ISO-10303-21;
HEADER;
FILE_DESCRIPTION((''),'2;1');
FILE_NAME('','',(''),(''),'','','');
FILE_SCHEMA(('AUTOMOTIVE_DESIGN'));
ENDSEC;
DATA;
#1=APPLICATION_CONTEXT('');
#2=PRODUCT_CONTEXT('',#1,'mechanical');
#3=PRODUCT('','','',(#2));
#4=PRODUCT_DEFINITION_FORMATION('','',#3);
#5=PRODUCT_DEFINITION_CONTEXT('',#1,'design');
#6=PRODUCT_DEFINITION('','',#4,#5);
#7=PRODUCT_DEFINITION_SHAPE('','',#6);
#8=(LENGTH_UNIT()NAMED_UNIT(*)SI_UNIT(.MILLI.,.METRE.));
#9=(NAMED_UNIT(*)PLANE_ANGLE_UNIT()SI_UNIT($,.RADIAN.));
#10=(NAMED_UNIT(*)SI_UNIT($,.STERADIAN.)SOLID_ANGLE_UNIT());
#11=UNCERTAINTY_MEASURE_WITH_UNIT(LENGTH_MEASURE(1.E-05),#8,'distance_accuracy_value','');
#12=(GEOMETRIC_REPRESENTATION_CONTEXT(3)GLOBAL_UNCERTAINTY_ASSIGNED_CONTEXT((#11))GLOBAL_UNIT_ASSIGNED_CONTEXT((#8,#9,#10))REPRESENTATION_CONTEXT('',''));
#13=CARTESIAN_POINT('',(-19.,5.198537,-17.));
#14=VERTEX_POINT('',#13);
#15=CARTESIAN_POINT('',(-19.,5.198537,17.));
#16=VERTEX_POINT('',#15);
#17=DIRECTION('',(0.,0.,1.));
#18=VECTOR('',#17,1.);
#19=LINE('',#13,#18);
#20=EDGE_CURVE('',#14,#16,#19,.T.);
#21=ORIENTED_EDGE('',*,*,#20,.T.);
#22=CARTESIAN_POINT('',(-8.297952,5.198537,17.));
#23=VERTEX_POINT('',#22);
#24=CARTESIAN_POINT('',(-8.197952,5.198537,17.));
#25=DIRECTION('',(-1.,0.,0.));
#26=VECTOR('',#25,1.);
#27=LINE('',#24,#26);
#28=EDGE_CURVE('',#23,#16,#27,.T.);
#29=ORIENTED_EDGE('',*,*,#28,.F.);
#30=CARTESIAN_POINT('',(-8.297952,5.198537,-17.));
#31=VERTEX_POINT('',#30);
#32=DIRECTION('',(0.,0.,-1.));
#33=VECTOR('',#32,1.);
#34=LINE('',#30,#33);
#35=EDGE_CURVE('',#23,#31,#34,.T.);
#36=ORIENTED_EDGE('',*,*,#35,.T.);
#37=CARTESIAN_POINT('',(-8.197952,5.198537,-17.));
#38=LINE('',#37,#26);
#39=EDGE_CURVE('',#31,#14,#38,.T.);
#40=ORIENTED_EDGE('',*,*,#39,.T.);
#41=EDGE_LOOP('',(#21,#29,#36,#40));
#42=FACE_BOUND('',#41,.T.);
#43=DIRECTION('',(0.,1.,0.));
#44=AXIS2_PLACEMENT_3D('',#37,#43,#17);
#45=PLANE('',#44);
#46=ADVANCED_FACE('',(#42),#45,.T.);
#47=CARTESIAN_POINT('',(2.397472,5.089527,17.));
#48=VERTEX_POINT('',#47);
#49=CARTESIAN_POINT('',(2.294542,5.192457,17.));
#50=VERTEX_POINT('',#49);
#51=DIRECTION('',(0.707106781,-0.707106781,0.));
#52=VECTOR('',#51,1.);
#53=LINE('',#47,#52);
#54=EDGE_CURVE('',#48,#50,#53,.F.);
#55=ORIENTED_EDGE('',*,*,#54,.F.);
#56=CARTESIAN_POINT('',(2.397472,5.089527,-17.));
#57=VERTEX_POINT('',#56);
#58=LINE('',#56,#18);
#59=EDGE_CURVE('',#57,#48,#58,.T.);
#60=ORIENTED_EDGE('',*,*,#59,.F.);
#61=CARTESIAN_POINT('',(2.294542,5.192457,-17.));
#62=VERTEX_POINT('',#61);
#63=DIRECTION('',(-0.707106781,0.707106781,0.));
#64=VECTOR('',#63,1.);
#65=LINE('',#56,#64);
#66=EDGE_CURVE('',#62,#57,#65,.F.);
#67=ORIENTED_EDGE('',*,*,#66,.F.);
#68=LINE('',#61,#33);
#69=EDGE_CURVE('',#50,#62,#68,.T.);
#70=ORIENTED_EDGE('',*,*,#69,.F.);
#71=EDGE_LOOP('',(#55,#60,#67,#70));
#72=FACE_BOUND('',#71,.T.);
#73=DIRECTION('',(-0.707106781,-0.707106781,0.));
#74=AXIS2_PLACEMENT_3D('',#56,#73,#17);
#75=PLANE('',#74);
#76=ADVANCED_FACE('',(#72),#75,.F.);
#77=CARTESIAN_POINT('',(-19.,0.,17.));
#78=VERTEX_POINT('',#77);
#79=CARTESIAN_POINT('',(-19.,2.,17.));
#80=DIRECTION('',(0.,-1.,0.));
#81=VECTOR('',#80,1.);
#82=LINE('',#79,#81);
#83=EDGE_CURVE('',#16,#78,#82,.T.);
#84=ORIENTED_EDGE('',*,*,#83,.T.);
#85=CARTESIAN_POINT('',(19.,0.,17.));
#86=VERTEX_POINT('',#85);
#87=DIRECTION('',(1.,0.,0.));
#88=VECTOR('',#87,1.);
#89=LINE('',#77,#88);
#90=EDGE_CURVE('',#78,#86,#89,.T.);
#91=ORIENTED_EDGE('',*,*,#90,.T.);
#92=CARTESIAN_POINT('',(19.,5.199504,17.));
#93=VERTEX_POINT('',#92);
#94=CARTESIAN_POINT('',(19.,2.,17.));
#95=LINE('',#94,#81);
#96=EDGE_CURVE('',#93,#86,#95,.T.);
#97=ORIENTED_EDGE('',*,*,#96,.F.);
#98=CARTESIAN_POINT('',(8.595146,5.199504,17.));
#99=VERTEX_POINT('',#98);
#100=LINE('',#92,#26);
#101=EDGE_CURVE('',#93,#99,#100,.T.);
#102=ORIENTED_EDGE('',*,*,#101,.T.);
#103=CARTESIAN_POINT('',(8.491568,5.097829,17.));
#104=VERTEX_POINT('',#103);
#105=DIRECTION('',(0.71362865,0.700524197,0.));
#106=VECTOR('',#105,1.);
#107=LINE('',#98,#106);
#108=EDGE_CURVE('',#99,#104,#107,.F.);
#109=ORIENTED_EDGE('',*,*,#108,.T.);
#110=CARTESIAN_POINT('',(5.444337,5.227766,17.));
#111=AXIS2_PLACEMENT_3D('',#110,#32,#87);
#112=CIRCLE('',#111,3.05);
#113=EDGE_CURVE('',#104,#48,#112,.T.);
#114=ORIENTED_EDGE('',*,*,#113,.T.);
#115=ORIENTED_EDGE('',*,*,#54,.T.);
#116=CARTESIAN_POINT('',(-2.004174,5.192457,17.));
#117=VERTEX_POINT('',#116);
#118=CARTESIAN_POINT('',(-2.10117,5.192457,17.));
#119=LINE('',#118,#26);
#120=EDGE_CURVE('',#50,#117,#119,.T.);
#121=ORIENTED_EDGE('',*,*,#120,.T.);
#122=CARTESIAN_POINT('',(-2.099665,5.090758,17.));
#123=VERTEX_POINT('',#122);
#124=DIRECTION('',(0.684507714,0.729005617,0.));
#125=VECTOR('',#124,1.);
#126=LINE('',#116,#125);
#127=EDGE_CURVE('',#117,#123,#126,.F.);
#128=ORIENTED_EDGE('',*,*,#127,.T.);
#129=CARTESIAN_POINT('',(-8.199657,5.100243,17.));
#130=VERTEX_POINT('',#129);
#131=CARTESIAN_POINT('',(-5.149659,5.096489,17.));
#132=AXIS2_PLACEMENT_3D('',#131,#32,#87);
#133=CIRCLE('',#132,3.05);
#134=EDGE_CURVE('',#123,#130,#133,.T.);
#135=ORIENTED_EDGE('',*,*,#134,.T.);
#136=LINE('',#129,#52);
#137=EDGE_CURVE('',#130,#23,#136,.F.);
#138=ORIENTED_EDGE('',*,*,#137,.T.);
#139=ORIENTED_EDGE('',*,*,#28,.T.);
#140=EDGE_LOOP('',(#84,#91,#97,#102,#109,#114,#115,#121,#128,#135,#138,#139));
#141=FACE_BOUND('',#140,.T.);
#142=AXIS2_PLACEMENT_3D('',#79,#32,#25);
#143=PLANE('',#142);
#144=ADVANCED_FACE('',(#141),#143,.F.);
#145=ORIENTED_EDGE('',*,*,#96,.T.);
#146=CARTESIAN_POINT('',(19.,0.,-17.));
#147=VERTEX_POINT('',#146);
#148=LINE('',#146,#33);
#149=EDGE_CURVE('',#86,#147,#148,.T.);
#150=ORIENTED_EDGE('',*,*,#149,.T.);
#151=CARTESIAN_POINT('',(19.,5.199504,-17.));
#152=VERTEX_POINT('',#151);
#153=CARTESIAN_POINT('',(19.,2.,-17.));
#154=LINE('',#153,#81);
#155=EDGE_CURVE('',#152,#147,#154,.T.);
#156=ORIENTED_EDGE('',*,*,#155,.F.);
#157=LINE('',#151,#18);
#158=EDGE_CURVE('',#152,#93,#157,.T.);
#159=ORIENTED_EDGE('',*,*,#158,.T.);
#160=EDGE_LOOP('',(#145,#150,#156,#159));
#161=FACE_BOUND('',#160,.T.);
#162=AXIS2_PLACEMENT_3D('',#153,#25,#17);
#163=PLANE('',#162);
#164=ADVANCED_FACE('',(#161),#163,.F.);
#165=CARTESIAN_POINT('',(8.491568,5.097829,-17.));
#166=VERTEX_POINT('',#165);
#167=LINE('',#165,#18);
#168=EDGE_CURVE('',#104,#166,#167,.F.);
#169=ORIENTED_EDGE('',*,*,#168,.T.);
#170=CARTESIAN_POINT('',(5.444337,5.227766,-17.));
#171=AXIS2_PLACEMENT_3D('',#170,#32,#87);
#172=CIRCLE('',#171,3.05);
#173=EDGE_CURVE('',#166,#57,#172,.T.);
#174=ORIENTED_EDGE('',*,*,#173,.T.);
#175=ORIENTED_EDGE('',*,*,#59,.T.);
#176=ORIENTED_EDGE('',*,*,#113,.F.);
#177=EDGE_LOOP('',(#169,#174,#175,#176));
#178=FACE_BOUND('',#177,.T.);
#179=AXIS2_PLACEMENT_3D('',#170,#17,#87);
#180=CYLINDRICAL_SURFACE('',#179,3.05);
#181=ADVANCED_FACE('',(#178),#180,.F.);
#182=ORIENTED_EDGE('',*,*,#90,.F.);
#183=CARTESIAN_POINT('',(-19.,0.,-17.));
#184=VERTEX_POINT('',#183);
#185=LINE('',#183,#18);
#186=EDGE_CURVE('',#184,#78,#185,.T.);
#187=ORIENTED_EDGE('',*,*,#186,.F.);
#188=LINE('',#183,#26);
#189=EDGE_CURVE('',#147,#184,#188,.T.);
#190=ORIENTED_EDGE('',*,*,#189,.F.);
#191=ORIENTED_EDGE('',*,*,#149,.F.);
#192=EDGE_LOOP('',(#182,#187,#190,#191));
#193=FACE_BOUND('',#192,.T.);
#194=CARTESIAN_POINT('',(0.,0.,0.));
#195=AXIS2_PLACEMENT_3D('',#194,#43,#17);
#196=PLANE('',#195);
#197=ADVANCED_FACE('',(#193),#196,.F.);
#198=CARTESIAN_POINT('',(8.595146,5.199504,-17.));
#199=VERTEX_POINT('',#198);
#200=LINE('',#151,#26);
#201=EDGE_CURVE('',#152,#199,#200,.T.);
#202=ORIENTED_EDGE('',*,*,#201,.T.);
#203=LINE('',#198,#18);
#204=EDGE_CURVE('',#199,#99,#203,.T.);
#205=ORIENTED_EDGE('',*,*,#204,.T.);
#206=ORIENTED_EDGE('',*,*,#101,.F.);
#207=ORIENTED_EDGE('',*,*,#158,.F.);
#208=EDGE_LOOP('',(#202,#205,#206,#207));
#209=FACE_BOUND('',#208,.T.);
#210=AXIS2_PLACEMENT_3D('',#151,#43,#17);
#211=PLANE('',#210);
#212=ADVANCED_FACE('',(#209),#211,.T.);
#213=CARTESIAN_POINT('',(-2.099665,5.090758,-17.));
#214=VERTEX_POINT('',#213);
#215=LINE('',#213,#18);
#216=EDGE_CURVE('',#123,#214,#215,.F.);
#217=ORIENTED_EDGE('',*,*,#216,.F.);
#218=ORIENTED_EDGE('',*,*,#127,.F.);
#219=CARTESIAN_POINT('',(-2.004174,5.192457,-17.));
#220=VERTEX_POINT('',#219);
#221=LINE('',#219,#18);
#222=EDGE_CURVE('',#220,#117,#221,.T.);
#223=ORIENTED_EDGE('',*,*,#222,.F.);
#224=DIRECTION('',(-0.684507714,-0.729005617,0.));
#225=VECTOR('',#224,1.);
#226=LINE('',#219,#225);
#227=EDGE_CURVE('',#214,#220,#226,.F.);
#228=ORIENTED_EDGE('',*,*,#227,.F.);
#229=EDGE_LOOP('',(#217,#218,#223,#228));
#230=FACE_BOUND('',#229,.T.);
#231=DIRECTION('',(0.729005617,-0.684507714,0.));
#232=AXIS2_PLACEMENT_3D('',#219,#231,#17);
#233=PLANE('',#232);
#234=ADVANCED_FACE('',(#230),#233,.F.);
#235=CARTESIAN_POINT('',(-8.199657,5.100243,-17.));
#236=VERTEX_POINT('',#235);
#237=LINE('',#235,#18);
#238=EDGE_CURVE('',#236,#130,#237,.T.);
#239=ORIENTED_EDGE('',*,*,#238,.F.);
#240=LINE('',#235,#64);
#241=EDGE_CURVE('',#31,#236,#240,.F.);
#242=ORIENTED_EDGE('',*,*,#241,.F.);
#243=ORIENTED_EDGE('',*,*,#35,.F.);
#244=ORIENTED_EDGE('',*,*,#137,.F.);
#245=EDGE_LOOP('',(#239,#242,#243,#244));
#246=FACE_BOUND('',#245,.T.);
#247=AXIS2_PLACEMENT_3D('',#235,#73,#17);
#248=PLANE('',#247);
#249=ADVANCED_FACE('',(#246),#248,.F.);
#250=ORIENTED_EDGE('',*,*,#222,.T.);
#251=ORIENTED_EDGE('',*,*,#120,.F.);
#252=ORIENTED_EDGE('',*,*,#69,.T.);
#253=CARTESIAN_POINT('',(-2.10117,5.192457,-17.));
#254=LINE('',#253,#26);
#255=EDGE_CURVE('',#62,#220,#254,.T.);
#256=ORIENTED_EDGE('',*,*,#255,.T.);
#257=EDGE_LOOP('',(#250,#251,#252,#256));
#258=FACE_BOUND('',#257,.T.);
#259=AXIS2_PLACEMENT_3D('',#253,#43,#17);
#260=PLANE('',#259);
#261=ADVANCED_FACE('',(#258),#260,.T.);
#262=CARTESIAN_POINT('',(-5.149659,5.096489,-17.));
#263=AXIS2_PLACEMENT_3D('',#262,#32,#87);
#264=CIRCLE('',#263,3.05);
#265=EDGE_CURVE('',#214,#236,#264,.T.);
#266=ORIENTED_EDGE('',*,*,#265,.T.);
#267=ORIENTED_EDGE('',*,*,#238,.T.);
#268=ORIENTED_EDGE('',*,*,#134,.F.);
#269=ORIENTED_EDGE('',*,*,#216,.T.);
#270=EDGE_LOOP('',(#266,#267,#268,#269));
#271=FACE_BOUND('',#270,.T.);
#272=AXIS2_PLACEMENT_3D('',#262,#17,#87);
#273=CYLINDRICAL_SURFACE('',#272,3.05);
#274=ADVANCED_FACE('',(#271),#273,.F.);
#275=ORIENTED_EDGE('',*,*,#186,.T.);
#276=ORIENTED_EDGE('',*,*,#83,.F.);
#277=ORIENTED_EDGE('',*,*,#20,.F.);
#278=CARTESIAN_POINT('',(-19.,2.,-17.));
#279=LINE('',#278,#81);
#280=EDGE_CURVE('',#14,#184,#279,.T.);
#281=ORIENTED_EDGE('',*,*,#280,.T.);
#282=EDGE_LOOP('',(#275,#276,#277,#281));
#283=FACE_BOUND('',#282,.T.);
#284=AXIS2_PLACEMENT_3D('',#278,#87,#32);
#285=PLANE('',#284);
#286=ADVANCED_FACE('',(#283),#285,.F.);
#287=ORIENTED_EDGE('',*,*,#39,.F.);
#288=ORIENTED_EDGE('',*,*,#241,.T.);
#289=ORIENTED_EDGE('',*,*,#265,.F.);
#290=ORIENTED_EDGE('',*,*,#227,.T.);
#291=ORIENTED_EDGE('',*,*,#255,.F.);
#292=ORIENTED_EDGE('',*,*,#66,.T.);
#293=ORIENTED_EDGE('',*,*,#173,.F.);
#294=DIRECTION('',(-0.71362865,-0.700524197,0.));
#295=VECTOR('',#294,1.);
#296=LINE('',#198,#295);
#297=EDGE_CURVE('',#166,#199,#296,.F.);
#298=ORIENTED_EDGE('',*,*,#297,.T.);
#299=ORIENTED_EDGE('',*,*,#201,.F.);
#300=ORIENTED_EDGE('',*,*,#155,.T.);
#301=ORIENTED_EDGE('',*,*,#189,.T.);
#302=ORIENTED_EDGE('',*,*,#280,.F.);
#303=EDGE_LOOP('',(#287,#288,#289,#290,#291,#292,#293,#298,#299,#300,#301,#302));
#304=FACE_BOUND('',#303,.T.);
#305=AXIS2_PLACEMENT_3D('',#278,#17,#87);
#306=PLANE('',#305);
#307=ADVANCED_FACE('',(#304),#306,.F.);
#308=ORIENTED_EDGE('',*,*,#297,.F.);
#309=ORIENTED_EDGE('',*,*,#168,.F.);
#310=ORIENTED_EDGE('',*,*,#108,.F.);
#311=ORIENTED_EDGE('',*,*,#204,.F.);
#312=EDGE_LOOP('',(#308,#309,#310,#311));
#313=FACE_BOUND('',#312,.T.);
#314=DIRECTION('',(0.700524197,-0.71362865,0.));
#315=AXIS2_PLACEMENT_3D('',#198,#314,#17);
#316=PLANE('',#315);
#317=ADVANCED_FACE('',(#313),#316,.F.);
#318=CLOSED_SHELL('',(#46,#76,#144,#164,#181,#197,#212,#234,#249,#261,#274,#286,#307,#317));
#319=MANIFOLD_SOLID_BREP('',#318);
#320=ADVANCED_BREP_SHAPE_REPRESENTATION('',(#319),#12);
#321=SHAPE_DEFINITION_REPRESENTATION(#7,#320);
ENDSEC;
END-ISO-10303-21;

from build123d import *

# Parameters (mm, degrees)
SKETCH1_W           = 38
SKETCH1_H           = 34
BOSS_EXTRUDE1_DEPTH = 2
BOSS_EXTRUDE2_DEPTH = 34
CHAMFER1_SIZE       = 0.1
CHAMFER1_SIZE_2     = 0.100939666
CHAMFER1_SIZE_3     = 0.096996068


with BuildPart() as part:
    # Sketch1 → Boss-Extrude1 (new body)
    with BuildSketch(Plane(origin=(0, 0, 0), x_dir=(1, 0, 0), z_dir=(0, 1, 0))):
        Rectangle(SKETCH1_W, SKETCH1_H)
    extrude(amount=BOSS_EXTRUDE1_DEPTH)

    # Sketch2 → Boss-Extrude2 (add, through all)
    with BuildSketch(Plane.XY.offset(17)):
        with BuildLine():
            Line((-2.101169585, 5.192456713), (2.394541693, 5.192456713))
            ThreePointArc((2.394541693, 5.192456713), (5.447861319, 2.177768465), (8.494206352, 5.199504374))
            Line((8.494206352, 5.199504374), (19, 5.199504374))
            Line((19, 5.199504374), (19, 1.662378765))
            Line((19, 1.662378765), (-19, 1.662378765))
            Line((-19, 1.662378765), (-19, 5.198537403))
            Line((-19, 5.198537403), (-8.197951747, 5.198537403))
            ThreePointArc((-8.197951747, 5.198537403), (-5.152701361, 2.046490686), (-2.101169585, 5.192456713))
        make_face()
    extrude(amount=-BOSS_EXTRUDE2_DEPTH)

    # Chamfer1
    # the kernel refuses this chamfer: 0.101178115, 0.100939666, 0.1, 0.096996068, 0.096814929 mm, written as the material it takes off along each edge
    with BuildSketch(Plane(origin=(2.394541693, 5.192456713, 17.264875528), x_dir=(0.028454787424249305, -0.9995950805564424, 0), z_dir=(0, 0, -1))) as chamfer1_piece_1:
        with BuildLine():
            Line((0.102971734, 0), (-CHAMFER1_SIZE * 0.0284547874242, CHAMFER1_SIZE * 0.999595080556))
            Line((-CHAMFER1_SIZE * 0.0284547874242, CHAMFER1_SIZE * 0.999595080556), (0, 0))
            ThreePointArc((0, 0), (0.052957758, 0.000434232), (0.102971734, 0))
        make_face()
    extrude(amount=34.529751055, mode=Mode.SUBTRACT)
    with BuildSketch(Plane(origin=(8.494206352, 5.199504374, 17.261624735), x_dir=(1, 0, 0), z_dir=(0, 0, -1))) as chamfer1_piece_2:
        with BuildLine():
            Line((CHAMFER1_SIZE_2 * 0.999999995384, 0), (-0.002638157, 0.10167581))
            ThreePointArc((-0.002638157, 0.10167581), (-0.000933226, 0.052300381), (0, 0))
            Line((0, 0), (CHAMFER1_SIZE_2 * 0.999999995384, 0))
        make_face()
    extrude(amount=34.52324947, mode=Mode.SUBTRACT)
    with BuildSketch(Plane(origin=(-8.197951747, 5.198537403, 17.257168299), x_dir=(-0.017346814306717553, -0.9998495326964995, 0), z_dir=(0, 0, -1))) as chamfer1_piece_3:
        with BuildLine():
            Line((0.098309437, 0), (CHAMFER1_SIZE * 0.0173468143067, CHAMFER1_SIZE * 0.999849532696))
            Line((CHAMFER1_SIZE * 0.0173468143067, CHAMFER1_SIZE * 0.999849532696), (0, 0))
            ThreePointArc((0, 0), (0.050545023, 0.000395805), (0.098309437, 0))
        make_face()
    extrude(amount=34.514336598, mode=Mode.SUBTRACT)
    with BuildSketch(Plane(origin=(-2.101169585, 5.192456713, 17.261555472), x_dir=(1, 0, 0), z_dir=(0, 0, -1))) as chamfer1_piece_4:
        with BuildLine():
            Line((CHAMFER1_SIZE_3 * 0.999999996404, 0), (0.001504787, 0.101698897))
            ThreePointArc((0.001504787, 0.101698897), (0.001197292, 0.052281476), (0, 0))
            Line((0, 0), (CHAMFER1_SIZE_3 * 0.999999996404, 0))
        make_face()
    extrude(amount=34.523110943, mode=Mode.SUBTRACT)


solid = part.part
